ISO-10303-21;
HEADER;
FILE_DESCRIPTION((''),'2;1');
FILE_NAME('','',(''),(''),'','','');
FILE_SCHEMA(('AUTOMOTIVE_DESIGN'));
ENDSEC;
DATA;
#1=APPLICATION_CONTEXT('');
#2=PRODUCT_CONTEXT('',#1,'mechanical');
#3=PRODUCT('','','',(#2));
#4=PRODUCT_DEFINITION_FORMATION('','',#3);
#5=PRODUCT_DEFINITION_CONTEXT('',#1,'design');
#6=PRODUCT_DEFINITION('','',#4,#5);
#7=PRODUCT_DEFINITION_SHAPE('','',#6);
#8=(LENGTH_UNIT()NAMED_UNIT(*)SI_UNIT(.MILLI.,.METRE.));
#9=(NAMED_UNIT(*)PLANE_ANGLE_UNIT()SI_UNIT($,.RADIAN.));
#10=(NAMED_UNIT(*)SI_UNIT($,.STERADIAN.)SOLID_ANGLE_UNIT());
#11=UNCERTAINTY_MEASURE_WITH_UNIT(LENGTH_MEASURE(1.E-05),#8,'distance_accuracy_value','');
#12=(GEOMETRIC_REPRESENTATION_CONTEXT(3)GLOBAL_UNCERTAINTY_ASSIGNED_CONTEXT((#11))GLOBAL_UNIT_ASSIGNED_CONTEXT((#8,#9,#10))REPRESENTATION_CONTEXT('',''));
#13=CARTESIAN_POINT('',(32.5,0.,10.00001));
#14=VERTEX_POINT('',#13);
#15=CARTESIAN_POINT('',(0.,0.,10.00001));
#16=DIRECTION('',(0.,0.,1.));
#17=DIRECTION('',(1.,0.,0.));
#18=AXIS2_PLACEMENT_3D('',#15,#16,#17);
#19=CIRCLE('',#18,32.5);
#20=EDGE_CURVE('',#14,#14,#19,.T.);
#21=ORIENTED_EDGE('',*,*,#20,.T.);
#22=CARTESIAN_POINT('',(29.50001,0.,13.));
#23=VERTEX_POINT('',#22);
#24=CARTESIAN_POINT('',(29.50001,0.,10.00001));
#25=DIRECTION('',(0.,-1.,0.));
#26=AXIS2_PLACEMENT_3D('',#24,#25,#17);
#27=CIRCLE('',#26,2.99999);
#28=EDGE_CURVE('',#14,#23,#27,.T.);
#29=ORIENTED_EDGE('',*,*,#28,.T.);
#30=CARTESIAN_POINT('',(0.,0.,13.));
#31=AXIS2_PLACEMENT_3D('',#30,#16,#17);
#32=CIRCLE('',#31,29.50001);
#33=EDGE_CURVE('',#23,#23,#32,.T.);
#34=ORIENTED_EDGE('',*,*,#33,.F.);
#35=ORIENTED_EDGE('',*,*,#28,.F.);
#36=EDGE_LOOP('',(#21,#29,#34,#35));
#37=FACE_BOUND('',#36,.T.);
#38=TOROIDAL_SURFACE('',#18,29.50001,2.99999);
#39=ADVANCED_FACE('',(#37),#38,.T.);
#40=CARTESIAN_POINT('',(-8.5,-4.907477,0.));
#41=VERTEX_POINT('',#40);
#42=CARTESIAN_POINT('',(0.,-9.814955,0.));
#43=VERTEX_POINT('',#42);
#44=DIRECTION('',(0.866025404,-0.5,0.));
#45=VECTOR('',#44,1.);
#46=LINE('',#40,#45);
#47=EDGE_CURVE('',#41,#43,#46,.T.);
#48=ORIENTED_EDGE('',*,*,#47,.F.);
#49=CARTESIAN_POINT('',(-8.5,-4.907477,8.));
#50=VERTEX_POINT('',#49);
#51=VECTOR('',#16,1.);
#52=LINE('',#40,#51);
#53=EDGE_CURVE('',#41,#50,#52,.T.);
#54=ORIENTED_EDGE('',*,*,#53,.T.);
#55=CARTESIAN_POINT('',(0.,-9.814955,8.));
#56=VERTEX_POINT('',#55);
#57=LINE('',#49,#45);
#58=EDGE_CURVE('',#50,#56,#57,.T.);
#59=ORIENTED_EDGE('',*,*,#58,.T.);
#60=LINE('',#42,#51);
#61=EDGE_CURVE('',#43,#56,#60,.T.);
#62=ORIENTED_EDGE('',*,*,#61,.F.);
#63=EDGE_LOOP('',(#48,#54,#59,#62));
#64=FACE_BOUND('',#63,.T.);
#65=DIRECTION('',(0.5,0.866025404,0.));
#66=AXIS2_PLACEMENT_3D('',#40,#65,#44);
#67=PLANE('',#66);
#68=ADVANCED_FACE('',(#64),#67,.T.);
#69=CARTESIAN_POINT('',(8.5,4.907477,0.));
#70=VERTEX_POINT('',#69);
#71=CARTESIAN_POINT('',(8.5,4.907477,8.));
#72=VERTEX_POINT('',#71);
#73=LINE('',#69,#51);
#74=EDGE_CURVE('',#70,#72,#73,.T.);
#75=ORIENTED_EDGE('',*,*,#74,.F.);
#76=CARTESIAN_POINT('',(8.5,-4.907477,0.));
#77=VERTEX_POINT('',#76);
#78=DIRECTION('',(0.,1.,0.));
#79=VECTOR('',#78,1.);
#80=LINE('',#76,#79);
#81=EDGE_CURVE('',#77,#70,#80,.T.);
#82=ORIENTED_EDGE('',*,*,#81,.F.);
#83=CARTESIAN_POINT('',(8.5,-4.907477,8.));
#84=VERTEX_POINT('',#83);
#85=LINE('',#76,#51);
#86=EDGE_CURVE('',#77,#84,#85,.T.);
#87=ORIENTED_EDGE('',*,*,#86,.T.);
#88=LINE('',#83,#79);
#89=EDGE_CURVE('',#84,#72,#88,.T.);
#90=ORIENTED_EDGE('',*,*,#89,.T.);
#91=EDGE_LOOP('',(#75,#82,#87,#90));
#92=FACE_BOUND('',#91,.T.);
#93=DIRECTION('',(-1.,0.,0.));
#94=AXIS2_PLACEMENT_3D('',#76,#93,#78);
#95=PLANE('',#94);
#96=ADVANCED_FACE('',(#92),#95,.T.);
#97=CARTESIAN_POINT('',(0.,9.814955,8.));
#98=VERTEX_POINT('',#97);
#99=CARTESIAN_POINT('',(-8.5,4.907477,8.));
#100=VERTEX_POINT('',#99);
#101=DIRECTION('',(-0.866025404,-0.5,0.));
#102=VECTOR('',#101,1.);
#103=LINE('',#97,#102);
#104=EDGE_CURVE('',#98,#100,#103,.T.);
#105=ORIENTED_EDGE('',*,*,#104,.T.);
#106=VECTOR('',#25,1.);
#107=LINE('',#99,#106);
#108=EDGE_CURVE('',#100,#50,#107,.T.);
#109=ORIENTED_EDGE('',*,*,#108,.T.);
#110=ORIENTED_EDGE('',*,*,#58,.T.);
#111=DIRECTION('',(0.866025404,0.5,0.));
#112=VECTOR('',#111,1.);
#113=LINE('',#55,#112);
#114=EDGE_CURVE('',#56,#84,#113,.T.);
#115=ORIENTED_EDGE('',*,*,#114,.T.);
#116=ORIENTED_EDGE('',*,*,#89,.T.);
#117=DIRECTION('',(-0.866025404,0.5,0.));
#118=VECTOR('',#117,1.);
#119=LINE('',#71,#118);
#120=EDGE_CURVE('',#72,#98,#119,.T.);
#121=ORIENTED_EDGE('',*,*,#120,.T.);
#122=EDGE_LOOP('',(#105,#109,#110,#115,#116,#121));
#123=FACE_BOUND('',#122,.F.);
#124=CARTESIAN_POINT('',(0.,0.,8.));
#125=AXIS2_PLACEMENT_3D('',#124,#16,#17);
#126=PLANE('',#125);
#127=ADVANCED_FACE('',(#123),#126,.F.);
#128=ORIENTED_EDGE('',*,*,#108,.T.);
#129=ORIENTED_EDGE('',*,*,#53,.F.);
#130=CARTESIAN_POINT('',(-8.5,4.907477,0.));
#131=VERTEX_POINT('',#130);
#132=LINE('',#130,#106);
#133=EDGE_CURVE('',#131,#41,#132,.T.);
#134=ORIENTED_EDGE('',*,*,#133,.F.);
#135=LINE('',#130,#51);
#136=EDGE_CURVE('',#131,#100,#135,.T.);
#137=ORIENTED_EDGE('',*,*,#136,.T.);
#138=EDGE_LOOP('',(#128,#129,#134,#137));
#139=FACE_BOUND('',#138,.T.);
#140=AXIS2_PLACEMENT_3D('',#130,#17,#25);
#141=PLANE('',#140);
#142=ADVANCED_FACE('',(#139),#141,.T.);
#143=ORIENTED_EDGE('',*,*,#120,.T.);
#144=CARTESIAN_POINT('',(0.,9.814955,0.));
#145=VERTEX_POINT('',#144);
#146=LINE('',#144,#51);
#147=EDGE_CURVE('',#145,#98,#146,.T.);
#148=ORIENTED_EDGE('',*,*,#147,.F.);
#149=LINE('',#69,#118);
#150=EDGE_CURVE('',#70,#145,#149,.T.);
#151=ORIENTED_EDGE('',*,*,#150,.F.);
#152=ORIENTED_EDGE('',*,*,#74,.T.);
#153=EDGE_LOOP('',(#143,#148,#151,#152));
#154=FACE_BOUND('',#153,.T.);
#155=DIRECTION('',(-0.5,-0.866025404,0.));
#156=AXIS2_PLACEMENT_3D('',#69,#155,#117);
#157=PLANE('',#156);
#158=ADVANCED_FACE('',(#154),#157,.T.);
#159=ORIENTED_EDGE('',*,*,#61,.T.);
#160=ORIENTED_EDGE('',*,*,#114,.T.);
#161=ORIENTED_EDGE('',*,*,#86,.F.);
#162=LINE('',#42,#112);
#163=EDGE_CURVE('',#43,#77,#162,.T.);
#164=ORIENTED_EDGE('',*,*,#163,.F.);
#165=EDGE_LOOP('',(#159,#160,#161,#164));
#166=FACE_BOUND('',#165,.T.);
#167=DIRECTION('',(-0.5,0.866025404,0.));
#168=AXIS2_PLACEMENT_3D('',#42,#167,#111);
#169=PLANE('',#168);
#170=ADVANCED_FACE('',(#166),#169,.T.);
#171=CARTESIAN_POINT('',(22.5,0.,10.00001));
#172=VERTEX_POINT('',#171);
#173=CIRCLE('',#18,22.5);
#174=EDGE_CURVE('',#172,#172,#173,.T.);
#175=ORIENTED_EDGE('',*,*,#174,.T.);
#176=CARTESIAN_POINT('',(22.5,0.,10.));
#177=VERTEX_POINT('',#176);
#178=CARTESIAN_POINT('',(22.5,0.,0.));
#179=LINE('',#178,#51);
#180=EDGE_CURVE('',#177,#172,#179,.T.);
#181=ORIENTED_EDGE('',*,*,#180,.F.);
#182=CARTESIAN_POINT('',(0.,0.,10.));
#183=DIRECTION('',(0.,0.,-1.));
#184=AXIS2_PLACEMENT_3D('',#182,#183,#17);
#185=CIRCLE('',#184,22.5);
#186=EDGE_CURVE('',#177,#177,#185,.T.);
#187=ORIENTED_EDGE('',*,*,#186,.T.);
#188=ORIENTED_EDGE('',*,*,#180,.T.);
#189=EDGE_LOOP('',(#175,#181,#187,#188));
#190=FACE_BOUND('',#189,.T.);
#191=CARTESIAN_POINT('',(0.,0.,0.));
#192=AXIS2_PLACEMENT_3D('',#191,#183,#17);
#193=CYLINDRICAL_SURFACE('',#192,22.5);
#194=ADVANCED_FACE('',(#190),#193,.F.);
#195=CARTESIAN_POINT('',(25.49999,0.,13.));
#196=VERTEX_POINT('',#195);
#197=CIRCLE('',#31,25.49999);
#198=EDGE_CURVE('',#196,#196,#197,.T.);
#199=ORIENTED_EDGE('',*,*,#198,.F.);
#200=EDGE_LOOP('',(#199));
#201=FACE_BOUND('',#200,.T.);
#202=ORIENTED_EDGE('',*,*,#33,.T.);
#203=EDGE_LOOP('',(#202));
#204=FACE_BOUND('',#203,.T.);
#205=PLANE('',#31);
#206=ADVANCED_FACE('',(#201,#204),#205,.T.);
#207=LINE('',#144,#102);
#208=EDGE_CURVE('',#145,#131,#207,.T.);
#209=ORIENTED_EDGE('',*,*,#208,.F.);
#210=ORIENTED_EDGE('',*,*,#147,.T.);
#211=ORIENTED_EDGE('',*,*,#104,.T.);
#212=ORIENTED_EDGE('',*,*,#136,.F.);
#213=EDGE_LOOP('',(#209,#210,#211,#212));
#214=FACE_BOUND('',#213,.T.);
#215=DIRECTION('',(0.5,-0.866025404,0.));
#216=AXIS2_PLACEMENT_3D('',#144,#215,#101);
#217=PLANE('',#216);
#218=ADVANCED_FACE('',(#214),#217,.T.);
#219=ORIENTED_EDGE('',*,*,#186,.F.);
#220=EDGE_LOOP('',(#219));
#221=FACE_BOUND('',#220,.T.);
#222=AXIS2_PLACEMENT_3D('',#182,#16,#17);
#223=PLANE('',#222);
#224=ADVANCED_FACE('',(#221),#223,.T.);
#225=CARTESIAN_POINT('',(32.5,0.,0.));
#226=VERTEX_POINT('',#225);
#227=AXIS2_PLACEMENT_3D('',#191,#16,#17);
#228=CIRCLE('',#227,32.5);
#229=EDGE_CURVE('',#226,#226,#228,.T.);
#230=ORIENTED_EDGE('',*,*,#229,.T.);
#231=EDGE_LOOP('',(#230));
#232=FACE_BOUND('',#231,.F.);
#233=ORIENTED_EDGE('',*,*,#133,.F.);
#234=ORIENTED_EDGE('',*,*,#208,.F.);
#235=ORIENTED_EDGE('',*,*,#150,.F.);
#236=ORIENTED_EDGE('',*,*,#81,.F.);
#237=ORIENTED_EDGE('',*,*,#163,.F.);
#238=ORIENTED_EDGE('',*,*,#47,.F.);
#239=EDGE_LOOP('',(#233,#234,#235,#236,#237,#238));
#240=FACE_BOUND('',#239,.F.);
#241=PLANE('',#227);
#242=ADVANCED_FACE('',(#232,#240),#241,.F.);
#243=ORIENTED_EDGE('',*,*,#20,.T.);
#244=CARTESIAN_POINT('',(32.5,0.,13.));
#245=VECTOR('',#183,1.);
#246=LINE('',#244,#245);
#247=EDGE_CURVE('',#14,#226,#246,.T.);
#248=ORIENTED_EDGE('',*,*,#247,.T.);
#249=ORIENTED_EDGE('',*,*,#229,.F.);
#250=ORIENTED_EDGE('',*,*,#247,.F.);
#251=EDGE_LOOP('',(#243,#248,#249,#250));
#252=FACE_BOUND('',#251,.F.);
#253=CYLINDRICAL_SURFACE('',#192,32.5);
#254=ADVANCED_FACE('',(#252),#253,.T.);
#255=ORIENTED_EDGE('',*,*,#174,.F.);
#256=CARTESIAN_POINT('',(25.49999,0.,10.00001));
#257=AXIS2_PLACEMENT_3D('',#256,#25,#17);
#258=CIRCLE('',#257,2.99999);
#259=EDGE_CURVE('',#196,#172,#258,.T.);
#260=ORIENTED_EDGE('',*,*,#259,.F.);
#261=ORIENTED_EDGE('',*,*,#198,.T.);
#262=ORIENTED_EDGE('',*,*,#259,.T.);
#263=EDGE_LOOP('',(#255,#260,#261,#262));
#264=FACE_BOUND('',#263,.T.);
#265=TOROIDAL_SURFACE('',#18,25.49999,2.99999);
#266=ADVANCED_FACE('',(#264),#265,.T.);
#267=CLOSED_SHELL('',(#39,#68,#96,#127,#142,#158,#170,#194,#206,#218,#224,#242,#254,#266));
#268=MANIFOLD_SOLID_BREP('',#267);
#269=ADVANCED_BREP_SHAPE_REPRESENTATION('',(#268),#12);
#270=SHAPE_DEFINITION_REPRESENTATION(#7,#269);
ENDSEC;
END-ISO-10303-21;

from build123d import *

# Parameters (mm, degrees)
F0_R     = 32.5
F0_R_2   = 22.5
F1_DEPTH = 10
F2_DEPTH = 13
F3_DEPTH = 8
F4_R     = 2.99999


# Not quite as in the source:
# - a fillet or chamfer is up to 0.001 mm smaller than in the source, because OpenCascade refuses the exact size


with BuildPart() as f1:
    # F0 (on Top) → F1 (new body)
    with BuildSketch(Plane.XY):
        Circle(F0_R)
        Circle(F0_R_2, mode=Mode.SUBTRACT)
        Circle(F0_R_2)
        Polygon((-8.5, 4.9074772881), (0, 9.8149545762), (8.5, 4.9074772881), (8.5, -4.9074772881), (0, -9.8149545762), (-8.5, -4.9074772881), align=None, mode=Mode.SUBTRACT)
        Polygon((8.5, 4.9074772881), (0, 9.8149545762), (-8.5, 4.9074772881), (-8.5, -4.9074772881), (0, -9.8149545762), (8.5, -4.9074772881), align=None)
    extrude(amount=F1_DEPTH)

    # F0 (on Top) → F2 (join)
    with BuildSketch(Plane.XY):
        Circle(F0_R)
        Circle(F0_R_2, mode=Mode.SUBTRACT)
    extrude(amount=F2_DEPTH)

    # F0 (on Top) → F3 (cut)
    with BuildSketch(Plane.XY):
        Polygon((8.5, 4.9074772881), (0, 9.8149545762), (-8.5, 4.9074772881), (-8.5, -4.9074772881), (0, -9.8149545762), (8.5, -4.9074772881), align=None)
    extrude(amount=F3_DEPTH, mode=Mode.SUBTRACT)

    # F4 (radius 3 in the source; OpenCascade refuses exactly that, so slightly less here)
    f4_edges = [f1.edges().sort_by_distance(p)[0] for p in [
        (-32.5, 0, 13),
        (-22.5, 0, 13),
    ]]
    fillet(f4_edges, radius=F4_R)


solid = f1.part
